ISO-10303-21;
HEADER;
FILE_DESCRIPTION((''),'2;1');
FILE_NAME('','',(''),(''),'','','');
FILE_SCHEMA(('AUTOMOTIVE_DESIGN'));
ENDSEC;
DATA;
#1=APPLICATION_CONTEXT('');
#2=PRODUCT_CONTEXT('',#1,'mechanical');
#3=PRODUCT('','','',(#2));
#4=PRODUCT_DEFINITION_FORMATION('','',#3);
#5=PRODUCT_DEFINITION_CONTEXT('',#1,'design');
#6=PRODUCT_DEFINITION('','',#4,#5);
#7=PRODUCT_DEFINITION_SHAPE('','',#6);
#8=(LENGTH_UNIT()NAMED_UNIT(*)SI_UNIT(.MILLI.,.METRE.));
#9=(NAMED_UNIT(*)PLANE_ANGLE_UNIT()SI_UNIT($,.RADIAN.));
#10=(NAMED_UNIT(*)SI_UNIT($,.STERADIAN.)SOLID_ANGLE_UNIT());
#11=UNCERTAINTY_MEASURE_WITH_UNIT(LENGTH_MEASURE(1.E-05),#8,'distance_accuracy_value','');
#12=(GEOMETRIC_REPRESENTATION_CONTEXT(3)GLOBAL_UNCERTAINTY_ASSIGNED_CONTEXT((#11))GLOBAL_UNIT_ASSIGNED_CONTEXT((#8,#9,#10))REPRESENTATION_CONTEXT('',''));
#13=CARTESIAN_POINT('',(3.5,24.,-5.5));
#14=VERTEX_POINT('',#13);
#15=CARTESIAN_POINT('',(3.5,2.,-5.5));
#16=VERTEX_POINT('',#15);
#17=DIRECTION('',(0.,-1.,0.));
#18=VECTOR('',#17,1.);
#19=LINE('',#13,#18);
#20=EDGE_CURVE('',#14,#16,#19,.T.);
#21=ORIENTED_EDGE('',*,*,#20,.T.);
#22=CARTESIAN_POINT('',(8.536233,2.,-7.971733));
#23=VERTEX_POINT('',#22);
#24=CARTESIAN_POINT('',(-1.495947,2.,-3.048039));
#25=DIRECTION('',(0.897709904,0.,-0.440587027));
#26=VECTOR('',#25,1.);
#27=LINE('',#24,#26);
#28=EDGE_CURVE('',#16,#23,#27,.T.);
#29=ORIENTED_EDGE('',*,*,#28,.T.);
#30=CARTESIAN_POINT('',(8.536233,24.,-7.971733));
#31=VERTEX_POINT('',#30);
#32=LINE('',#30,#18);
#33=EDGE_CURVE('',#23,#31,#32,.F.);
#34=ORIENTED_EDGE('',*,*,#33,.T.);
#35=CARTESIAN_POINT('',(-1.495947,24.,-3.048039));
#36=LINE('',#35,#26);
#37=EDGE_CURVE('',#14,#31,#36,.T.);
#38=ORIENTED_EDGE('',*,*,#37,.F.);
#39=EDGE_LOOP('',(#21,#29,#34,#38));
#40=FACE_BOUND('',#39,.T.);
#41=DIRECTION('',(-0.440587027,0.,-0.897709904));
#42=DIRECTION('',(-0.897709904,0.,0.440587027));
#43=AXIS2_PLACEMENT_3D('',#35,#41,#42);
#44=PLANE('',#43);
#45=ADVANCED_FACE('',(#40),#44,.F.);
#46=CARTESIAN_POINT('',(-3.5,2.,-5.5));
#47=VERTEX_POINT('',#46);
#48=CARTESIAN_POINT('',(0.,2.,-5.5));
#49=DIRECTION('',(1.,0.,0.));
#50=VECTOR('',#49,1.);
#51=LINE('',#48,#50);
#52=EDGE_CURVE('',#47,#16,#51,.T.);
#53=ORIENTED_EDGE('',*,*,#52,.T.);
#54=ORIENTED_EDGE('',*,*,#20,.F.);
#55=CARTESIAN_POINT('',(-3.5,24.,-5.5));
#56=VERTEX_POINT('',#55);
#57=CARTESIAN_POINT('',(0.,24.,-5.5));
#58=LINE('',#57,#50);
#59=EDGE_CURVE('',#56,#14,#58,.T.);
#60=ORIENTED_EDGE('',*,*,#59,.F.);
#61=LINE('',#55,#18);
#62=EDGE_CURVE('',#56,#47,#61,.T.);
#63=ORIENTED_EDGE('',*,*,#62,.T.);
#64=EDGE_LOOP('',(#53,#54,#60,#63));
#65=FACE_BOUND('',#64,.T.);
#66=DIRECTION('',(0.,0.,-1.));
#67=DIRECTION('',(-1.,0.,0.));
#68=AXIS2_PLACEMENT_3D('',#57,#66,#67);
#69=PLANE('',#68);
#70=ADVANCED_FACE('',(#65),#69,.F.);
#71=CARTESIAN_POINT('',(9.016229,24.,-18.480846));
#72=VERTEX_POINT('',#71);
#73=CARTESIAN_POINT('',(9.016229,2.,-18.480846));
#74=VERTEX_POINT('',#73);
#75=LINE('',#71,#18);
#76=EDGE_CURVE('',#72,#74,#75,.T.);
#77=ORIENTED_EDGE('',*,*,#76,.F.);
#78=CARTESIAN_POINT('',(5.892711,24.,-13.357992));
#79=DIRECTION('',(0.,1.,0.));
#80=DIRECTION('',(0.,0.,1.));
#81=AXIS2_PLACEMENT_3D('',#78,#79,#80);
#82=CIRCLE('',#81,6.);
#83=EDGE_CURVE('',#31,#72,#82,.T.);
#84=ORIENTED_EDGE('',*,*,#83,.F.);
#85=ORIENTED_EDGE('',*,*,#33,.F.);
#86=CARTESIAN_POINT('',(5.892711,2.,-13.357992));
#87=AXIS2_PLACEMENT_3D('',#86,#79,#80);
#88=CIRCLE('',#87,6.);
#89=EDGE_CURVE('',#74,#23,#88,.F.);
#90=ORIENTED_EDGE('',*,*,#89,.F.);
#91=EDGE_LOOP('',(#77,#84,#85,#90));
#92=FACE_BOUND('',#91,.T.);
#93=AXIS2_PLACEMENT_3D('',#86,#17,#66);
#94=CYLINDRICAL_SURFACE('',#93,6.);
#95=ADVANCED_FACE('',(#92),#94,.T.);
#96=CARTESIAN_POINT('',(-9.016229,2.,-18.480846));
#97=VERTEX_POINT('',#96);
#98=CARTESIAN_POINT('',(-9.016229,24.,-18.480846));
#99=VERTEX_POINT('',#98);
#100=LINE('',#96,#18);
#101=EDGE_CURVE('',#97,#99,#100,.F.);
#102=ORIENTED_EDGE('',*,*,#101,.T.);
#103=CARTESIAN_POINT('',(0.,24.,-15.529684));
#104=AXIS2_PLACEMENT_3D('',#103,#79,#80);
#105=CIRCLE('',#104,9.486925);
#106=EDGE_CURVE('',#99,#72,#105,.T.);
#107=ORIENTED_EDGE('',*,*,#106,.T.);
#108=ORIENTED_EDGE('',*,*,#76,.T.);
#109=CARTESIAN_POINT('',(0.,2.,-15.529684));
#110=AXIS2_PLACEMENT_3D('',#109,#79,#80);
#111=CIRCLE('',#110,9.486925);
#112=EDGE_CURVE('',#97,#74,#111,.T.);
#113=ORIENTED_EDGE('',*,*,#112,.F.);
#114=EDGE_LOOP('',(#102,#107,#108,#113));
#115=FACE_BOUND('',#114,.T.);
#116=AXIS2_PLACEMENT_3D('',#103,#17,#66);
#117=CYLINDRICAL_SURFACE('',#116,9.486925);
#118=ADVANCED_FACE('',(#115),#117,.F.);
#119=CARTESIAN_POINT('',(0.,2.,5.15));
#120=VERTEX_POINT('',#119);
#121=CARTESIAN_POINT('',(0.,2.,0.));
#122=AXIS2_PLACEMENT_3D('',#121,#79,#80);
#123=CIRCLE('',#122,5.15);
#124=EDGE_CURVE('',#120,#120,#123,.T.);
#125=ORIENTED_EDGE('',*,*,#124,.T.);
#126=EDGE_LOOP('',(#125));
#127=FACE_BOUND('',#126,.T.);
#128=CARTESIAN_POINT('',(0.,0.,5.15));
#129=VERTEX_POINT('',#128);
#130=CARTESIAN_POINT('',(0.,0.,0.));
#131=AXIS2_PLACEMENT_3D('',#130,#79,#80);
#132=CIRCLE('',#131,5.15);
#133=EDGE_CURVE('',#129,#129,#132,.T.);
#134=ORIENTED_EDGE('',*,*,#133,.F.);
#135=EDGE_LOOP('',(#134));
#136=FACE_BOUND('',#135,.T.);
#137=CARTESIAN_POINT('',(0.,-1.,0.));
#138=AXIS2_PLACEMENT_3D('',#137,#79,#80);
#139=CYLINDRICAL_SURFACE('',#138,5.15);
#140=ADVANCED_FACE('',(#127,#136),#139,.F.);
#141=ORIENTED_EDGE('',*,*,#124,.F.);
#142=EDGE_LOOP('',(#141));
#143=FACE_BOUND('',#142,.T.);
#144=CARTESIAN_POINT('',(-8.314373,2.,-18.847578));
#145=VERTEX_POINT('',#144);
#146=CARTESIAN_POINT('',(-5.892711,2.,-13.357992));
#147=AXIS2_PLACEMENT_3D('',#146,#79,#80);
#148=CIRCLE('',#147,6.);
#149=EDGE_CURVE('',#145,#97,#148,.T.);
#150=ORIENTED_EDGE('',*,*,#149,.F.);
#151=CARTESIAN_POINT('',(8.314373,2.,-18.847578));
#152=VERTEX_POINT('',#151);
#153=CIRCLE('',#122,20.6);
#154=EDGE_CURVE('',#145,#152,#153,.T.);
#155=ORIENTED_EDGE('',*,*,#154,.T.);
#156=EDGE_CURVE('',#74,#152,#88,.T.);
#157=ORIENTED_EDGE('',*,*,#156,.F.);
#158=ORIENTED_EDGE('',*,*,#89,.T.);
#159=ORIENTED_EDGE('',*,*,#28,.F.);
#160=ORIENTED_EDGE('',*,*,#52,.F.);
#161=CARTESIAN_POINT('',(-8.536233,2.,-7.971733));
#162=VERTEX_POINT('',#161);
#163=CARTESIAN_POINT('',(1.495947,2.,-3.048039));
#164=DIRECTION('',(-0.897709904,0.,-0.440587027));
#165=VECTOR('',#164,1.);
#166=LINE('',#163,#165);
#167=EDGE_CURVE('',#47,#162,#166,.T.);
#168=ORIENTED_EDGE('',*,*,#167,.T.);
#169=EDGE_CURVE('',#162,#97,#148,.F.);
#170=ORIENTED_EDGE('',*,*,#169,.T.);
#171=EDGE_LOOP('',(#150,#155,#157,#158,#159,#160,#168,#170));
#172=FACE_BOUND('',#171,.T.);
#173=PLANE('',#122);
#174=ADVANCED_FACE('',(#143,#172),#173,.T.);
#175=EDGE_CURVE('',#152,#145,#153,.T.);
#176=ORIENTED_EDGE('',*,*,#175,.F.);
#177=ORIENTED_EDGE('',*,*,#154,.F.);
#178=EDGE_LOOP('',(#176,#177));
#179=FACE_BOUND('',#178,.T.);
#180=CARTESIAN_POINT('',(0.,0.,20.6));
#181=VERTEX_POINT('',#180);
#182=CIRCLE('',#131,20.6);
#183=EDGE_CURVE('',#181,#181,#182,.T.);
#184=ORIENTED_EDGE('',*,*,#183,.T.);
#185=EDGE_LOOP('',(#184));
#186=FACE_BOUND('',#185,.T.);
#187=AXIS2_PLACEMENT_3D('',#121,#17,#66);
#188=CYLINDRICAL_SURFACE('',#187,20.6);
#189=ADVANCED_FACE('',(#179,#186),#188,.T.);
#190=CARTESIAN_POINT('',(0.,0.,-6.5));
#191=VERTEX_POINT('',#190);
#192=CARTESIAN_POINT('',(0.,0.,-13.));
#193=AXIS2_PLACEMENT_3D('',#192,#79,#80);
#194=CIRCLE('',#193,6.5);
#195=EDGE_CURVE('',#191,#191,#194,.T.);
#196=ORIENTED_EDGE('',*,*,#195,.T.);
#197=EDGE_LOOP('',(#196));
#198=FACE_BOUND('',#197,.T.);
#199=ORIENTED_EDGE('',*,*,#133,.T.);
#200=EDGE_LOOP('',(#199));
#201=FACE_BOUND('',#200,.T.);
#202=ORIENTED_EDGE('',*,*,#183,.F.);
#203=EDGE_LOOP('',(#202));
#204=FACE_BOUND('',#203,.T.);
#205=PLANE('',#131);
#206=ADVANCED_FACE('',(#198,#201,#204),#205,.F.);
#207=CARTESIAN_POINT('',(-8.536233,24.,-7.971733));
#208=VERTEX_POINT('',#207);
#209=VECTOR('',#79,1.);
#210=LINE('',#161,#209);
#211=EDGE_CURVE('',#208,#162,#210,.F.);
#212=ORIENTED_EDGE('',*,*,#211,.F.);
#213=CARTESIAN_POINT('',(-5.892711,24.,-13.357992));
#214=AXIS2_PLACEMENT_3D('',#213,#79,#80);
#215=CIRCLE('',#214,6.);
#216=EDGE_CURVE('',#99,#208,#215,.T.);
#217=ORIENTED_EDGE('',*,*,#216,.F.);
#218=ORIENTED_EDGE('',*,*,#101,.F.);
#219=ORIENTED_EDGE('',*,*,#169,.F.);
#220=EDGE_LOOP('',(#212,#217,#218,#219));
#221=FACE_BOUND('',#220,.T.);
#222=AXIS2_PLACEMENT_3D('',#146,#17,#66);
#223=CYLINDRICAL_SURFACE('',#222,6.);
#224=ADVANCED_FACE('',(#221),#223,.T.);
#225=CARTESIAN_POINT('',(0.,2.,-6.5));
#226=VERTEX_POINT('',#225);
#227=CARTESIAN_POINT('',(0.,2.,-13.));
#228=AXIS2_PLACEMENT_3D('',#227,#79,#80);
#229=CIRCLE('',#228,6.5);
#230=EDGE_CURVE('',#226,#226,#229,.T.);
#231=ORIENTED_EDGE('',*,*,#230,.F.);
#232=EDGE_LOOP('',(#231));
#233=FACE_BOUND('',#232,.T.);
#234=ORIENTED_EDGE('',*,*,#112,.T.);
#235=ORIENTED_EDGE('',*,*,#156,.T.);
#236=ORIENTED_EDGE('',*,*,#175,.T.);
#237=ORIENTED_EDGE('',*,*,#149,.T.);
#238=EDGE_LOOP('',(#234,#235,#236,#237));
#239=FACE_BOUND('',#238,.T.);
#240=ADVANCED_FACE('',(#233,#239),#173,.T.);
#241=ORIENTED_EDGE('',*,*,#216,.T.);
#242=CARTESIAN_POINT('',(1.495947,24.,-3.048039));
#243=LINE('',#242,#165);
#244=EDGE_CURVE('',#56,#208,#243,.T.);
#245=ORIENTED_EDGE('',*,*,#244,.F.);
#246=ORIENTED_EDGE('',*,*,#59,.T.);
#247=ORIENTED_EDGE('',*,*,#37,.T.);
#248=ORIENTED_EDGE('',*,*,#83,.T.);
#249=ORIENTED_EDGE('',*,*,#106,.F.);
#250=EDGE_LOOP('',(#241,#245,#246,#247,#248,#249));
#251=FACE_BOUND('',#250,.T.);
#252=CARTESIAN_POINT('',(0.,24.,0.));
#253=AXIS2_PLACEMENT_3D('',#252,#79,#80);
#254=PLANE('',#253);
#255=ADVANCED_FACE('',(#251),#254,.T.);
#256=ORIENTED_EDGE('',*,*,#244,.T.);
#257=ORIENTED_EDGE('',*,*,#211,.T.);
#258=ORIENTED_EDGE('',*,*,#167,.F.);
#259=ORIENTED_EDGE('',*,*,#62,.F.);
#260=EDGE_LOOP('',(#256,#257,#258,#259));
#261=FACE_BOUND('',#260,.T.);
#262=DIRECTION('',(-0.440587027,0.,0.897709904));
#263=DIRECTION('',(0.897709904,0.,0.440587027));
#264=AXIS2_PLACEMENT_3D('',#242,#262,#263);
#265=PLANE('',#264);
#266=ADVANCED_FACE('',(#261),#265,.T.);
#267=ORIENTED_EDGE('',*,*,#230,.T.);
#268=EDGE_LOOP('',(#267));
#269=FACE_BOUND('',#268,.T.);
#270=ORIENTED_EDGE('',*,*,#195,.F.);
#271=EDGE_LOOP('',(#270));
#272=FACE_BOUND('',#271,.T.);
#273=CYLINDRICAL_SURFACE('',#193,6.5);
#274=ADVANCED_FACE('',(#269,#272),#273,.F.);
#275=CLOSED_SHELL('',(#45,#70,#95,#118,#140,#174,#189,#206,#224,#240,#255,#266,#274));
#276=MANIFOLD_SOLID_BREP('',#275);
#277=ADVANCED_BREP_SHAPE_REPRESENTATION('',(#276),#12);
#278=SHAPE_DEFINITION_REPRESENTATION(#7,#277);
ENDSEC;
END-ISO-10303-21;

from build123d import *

# Parameters (mm, degrees)
SKETCH1_R           = 20.6
BOSS_EXTRUDE1_DEPTH = 2
SKETCH2_R           = 5.15
CUT_EXTRUDE1_DEPTH  = 3
SKETCH3_R           = 6.5
CUT_EXTRUDE2_DEPTH  = 2
BOSS_EXTRUDE4_DEPTH = 22
FILLET2_R           = 6


with BuildPart() as part:
    # Sketch1 → Boss-Extrude1 (new body)
    with BuildSketch(Plane(origin=(0, 0, 0), x_dir=(1, 0, 0), z_dir=(0, 1, 0))):
        with Locations(Location((0, 0, 0), (0, 0, 270))):
            Circle(SKETCH1_R)
    extrude(amount=BOSS_EXTRUDE1_DEPTH)

    # Sketch2 → Cut-Extrude1 (cut)
    with BuildSketch(Plane(origin=(0, 2, 0), x_dir=(1, 0, 0), z_dir=(0, 1, 0))):
        with Locations(Location((0, 0, 0), (0, 0, 270))):
            Circle(SKETCH2_R)
    extrude(amount=-CUT_EXTRUDE1_DEPTH, mode=Mode.SUBTRACT)

    # Sketch3 → Cut-Extrude2 (cut)
    with BuildSketch(Plane(origin=(0, 2, 0), x_dir=(1, 0, 0), z_dir=(0, 1, 0))):
        with Locations(Location((0, 13, 0), (0, 0, 270))):
            Circle(SKETCH3_R)
    extrude(amount=-CUT_EXTRUDE2_DEPTH, mode=Mode.SUBTRACT)

    # Sketch4 → Boss-Extrude4 (add)
    with BuildSketch(Plane(origin=(0, 2, 0), x_dir=(1, 0, 0), z_dir=(0, 1, 0))):
        with BuildLine():
            Line((-16.743954133, 12), (-3.5, 5.5))
            Line((-3.5, 5.5), (3.5, 5.5))
            Line((3.5, 5.5), (16.743954133, 12))
            ThreePointArc((16.743954133, 12), (13.279606143, 15.748398671), (9, 18.529975715))
            ThreePointArc((9, 18.529975715), (0, 6.042759079), (-9, 18.529975715))
            ThreePointArc((-9, 18.529975715), (-13.279606143, 15.748398671), (-16.743954133, 12))
        make_face()
    extrude(amount=BOSS_EXTRUDE4_DEPTH)

    # Fillet2
    # the kernel refuses this fillet: 6 mm, written as the material it takes off along each edge
    with BuildSketch(Plane(origin=(16.743954133, 2, -12), x_dir=(-0.7761796310564387, 0, -0.6305118399626535), z_dir=(0, 1, 0))) as fillet2_piece_1:
        with BuildLine():
            CenterArc((9.278744028, 5.78779133), FILLET2_R, 155.229237023, 130.054584679)
            Line((3.830795632, 8.301724161), (0, 0))
            ThreePointArc((0, 0), (5.430174062, -0.728583099), (10.860348123, 0))
        make_face()
    extrude(amount=49.150870308, mode=Mode.SUBTRACT)
    with BuildSketch(Plane(origin=(-16.743954133, 2, -12), x_dir=(0.7761796310564387, 0, -0.6305118399626534), z_dir=(0, 1, 0))) as fillet2_piece_2:
        with BuildLine():
            CenterArc((9.278744028, -5.78779133), FILLET2_R, 74.716178298, 130.054584679)
            Line((3.830795632, -8.301724161), (0, 0))
            ThreePointArc((0, 0), (5.430174062, 0.728583099), (10.860348123, 0))
        make_face()
    extrude(amount=49.150870308, mode=Mode.SUBTRACT)


solid = part.part
